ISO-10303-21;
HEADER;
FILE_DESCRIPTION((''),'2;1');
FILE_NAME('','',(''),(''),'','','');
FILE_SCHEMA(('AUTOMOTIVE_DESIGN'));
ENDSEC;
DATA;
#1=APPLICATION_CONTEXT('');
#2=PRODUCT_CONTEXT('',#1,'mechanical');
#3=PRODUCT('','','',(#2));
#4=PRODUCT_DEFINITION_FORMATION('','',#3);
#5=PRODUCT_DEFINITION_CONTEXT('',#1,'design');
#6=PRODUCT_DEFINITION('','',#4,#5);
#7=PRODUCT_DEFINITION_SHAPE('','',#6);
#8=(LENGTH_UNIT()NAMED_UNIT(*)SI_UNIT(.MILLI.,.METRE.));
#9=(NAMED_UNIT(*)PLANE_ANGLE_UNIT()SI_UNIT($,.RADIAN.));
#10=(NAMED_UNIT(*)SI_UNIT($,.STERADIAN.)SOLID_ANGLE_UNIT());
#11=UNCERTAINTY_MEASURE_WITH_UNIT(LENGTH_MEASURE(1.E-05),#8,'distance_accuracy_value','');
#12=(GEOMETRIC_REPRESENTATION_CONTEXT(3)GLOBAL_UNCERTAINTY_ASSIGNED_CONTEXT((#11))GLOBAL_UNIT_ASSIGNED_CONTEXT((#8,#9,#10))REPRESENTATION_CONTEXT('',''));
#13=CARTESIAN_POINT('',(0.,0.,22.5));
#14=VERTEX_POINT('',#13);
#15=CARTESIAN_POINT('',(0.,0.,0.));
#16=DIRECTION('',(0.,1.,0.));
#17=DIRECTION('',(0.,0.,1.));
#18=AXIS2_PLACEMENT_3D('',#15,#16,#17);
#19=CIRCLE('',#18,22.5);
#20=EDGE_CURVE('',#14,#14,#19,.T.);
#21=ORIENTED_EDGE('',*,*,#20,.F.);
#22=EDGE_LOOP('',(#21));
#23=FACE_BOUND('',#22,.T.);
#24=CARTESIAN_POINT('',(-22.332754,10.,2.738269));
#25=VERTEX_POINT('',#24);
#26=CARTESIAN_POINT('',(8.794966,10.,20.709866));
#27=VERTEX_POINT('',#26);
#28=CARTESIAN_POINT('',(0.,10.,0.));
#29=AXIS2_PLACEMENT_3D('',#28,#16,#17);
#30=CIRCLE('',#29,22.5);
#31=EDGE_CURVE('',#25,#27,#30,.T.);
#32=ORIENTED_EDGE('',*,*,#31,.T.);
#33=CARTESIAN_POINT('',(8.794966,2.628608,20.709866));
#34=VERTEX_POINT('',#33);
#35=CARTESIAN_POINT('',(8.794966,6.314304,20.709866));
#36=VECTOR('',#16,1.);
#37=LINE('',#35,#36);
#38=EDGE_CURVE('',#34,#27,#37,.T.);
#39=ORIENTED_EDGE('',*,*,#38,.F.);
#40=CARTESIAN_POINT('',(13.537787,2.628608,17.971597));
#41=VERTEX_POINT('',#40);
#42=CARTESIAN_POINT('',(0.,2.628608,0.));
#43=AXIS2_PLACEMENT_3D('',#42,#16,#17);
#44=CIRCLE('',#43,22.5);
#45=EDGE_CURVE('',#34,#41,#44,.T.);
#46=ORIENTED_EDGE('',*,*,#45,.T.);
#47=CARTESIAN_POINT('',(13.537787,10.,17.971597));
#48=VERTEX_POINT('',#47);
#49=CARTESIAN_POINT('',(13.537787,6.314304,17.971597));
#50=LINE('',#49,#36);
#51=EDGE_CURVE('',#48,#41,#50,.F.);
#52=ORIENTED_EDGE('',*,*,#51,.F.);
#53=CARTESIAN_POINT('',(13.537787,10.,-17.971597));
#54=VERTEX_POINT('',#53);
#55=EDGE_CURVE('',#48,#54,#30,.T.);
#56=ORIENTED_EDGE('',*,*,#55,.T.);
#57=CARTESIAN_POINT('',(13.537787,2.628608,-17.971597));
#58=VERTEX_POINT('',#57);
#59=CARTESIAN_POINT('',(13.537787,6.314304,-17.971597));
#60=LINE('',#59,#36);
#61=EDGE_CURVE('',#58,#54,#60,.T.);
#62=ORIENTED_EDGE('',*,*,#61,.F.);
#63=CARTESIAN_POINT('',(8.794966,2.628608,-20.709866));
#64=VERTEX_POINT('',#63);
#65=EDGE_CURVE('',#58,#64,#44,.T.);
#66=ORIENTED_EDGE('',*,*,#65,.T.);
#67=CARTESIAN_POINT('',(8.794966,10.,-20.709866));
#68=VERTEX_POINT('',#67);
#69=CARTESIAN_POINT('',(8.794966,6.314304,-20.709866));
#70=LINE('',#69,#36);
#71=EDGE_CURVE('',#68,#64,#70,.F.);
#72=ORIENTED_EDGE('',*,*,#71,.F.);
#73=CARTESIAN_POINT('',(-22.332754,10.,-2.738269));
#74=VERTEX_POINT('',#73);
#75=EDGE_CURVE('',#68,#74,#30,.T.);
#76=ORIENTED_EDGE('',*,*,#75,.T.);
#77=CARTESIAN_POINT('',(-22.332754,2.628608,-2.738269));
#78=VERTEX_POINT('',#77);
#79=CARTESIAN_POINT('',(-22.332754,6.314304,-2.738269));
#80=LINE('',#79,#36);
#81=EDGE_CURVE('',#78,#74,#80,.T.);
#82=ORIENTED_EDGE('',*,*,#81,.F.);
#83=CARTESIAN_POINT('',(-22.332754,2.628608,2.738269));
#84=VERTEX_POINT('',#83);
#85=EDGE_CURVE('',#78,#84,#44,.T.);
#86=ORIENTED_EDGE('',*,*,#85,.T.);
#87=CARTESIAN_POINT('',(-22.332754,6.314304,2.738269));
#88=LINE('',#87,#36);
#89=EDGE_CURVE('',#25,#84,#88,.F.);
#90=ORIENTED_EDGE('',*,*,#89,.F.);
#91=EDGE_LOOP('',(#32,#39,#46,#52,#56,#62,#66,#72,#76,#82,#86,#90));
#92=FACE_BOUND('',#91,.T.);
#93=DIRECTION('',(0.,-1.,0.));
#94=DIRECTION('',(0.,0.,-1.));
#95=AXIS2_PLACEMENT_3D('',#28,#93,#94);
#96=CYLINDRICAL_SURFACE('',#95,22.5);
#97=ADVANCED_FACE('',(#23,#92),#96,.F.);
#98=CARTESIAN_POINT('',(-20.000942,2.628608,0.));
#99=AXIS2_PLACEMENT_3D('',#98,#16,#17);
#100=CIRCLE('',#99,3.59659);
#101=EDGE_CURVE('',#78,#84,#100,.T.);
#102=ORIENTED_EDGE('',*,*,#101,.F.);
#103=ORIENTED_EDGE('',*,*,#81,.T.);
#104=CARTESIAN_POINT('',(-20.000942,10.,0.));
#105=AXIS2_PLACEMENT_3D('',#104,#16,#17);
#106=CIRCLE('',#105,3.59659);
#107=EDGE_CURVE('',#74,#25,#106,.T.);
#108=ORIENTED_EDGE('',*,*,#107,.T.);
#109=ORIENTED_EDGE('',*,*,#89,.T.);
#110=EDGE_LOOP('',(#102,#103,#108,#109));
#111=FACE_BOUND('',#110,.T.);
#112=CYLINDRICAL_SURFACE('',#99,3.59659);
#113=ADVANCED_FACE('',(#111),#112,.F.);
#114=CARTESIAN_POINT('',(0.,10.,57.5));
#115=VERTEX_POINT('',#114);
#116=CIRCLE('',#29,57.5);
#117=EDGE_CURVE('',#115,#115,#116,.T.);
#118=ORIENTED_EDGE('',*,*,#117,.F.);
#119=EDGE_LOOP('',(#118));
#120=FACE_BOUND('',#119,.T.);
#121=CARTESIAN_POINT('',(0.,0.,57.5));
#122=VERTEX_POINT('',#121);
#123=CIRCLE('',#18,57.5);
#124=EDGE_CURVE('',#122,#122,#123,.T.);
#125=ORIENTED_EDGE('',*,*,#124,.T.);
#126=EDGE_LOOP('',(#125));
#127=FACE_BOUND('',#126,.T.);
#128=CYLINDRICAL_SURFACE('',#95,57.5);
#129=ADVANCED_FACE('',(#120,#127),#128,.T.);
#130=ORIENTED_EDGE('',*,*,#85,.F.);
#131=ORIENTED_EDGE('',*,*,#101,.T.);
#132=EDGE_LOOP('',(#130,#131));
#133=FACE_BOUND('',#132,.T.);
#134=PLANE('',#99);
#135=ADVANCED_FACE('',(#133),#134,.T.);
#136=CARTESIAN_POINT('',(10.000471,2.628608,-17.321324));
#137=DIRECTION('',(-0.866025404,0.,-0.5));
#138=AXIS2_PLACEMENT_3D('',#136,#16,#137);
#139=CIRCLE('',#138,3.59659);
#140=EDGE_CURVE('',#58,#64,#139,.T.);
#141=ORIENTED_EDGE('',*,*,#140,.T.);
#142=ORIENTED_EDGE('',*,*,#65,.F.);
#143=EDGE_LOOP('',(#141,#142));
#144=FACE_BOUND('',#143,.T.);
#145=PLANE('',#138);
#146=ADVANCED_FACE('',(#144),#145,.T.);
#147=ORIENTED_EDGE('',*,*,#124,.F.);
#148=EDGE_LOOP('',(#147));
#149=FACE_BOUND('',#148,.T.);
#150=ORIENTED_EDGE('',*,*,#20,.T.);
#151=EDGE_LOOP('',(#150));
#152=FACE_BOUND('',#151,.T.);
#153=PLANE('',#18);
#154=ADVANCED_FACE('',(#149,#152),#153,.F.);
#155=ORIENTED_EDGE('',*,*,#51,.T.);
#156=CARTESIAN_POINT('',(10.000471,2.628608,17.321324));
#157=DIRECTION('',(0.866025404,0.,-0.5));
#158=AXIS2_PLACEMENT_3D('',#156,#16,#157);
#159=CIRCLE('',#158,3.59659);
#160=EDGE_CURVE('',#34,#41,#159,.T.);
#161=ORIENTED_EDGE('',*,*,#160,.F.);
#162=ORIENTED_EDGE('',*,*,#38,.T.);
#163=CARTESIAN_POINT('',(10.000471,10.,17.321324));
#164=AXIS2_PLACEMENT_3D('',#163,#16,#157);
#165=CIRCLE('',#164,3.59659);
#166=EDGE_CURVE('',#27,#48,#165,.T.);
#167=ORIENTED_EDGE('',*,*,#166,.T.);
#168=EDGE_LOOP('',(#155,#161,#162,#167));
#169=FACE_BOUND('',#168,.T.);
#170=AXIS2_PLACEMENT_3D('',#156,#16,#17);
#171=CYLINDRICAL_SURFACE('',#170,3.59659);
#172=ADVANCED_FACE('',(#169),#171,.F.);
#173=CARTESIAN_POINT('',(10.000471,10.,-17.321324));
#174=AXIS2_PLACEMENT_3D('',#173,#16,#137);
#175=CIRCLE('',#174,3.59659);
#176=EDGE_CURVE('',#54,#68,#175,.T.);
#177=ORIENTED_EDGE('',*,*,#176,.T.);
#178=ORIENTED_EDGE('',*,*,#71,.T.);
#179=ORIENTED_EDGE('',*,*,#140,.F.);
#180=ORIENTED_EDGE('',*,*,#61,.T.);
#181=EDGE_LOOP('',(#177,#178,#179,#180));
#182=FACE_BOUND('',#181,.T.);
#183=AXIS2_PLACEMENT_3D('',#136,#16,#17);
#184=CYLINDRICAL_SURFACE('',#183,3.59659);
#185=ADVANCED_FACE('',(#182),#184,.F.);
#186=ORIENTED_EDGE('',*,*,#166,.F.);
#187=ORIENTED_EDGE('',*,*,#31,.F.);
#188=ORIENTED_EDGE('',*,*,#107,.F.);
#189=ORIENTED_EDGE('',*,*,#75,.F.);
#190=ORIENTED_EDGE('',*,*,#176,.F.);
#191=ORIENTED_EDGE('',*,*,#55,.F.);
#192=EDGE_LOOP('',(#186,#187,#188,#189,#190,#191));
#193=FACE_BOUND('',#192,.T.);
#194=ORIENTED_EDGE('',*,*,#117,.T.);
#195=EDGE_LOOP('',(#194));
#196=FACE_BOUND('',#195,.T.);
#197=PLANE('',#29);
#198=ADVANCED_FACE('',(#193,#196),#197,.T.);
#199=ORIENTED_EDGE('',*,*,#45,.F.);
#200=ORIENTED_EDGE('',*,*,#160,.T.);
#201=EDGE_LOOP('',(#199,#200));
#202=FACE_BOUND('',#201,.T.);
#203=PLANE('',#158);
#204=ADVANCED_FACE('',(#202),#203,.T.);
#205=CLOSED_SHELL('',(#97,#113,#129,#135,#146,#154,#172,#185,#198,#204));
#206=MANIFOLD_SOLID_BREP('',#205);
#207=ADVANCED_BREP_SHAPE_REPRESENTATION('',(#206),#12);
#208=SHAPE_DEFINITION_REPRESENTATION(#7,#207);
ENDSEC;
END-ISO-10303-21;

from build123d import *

# Parameters (mm, degrees)
SKETCH1_R           = 57.5
BOSS_EXTRUDE1_DEPTH = 10
SKETCH2_R           = 22.5
CUT_EXTRUDE1_DEPTH  = 82.929848041
SKETCH3_R           = 3.59659005
CUT_EXTRUDE2_DEPTH  = 7.371392203
CIRPATTERN1_COUNT   = 3


with BuildPart() as part:
    # Sketch1 → Boss-Extrude1 (new body)
    with BuildSketch(Plane(origin=(0, 0, 0), x_dir=(1, 0, 0), z_dir=(0, 1, 0))):
        Circle(SKETCH1_R)
    extrude(amount=BOSS_EXTRUDE1_DEPTH)

    # Sketch2 → Cut-Extrude1 (cut, through all)
    with BuildSketch(Plane(origin=(0, 0, 0), x_dir=(1, 0, 0), z_dir=(0, 1, 0))):
        Circle(SKETCH2_R)
    extrude(amount=CUT_EXTRUDE1_DEPTH, mode=Mode.SUBTRACT)

    # Sketch3 → Cut-Extrude2 (cut)
    with BuildSketch(Plane(origin=(0, 10, 0), x_dir=(1, 0, 0), z_dir=(0, 1, 0))):
        with Locations((-20.00094245, 0)):
            Circle(SKETCH3_R)
    cut_extrude2 = extrude(amount=-CUT_EXTRUDE2_DEPTH, mode=Mode.SUBTRACT)

    # CirPattern1: Cut-Extrude2 ×3 about axis
    cirpattern1_axis = Axis((0, 0, 0), (0, 1, 0))
    for i in range(1, CIRPATTERN1_COUNT):
        add(cut_extrude2.rotate(cirpattern1_axis, i * 360 / CIRPATTERN1_COUNT), mode=Mode.SUBTRACT)


solid = part.part
